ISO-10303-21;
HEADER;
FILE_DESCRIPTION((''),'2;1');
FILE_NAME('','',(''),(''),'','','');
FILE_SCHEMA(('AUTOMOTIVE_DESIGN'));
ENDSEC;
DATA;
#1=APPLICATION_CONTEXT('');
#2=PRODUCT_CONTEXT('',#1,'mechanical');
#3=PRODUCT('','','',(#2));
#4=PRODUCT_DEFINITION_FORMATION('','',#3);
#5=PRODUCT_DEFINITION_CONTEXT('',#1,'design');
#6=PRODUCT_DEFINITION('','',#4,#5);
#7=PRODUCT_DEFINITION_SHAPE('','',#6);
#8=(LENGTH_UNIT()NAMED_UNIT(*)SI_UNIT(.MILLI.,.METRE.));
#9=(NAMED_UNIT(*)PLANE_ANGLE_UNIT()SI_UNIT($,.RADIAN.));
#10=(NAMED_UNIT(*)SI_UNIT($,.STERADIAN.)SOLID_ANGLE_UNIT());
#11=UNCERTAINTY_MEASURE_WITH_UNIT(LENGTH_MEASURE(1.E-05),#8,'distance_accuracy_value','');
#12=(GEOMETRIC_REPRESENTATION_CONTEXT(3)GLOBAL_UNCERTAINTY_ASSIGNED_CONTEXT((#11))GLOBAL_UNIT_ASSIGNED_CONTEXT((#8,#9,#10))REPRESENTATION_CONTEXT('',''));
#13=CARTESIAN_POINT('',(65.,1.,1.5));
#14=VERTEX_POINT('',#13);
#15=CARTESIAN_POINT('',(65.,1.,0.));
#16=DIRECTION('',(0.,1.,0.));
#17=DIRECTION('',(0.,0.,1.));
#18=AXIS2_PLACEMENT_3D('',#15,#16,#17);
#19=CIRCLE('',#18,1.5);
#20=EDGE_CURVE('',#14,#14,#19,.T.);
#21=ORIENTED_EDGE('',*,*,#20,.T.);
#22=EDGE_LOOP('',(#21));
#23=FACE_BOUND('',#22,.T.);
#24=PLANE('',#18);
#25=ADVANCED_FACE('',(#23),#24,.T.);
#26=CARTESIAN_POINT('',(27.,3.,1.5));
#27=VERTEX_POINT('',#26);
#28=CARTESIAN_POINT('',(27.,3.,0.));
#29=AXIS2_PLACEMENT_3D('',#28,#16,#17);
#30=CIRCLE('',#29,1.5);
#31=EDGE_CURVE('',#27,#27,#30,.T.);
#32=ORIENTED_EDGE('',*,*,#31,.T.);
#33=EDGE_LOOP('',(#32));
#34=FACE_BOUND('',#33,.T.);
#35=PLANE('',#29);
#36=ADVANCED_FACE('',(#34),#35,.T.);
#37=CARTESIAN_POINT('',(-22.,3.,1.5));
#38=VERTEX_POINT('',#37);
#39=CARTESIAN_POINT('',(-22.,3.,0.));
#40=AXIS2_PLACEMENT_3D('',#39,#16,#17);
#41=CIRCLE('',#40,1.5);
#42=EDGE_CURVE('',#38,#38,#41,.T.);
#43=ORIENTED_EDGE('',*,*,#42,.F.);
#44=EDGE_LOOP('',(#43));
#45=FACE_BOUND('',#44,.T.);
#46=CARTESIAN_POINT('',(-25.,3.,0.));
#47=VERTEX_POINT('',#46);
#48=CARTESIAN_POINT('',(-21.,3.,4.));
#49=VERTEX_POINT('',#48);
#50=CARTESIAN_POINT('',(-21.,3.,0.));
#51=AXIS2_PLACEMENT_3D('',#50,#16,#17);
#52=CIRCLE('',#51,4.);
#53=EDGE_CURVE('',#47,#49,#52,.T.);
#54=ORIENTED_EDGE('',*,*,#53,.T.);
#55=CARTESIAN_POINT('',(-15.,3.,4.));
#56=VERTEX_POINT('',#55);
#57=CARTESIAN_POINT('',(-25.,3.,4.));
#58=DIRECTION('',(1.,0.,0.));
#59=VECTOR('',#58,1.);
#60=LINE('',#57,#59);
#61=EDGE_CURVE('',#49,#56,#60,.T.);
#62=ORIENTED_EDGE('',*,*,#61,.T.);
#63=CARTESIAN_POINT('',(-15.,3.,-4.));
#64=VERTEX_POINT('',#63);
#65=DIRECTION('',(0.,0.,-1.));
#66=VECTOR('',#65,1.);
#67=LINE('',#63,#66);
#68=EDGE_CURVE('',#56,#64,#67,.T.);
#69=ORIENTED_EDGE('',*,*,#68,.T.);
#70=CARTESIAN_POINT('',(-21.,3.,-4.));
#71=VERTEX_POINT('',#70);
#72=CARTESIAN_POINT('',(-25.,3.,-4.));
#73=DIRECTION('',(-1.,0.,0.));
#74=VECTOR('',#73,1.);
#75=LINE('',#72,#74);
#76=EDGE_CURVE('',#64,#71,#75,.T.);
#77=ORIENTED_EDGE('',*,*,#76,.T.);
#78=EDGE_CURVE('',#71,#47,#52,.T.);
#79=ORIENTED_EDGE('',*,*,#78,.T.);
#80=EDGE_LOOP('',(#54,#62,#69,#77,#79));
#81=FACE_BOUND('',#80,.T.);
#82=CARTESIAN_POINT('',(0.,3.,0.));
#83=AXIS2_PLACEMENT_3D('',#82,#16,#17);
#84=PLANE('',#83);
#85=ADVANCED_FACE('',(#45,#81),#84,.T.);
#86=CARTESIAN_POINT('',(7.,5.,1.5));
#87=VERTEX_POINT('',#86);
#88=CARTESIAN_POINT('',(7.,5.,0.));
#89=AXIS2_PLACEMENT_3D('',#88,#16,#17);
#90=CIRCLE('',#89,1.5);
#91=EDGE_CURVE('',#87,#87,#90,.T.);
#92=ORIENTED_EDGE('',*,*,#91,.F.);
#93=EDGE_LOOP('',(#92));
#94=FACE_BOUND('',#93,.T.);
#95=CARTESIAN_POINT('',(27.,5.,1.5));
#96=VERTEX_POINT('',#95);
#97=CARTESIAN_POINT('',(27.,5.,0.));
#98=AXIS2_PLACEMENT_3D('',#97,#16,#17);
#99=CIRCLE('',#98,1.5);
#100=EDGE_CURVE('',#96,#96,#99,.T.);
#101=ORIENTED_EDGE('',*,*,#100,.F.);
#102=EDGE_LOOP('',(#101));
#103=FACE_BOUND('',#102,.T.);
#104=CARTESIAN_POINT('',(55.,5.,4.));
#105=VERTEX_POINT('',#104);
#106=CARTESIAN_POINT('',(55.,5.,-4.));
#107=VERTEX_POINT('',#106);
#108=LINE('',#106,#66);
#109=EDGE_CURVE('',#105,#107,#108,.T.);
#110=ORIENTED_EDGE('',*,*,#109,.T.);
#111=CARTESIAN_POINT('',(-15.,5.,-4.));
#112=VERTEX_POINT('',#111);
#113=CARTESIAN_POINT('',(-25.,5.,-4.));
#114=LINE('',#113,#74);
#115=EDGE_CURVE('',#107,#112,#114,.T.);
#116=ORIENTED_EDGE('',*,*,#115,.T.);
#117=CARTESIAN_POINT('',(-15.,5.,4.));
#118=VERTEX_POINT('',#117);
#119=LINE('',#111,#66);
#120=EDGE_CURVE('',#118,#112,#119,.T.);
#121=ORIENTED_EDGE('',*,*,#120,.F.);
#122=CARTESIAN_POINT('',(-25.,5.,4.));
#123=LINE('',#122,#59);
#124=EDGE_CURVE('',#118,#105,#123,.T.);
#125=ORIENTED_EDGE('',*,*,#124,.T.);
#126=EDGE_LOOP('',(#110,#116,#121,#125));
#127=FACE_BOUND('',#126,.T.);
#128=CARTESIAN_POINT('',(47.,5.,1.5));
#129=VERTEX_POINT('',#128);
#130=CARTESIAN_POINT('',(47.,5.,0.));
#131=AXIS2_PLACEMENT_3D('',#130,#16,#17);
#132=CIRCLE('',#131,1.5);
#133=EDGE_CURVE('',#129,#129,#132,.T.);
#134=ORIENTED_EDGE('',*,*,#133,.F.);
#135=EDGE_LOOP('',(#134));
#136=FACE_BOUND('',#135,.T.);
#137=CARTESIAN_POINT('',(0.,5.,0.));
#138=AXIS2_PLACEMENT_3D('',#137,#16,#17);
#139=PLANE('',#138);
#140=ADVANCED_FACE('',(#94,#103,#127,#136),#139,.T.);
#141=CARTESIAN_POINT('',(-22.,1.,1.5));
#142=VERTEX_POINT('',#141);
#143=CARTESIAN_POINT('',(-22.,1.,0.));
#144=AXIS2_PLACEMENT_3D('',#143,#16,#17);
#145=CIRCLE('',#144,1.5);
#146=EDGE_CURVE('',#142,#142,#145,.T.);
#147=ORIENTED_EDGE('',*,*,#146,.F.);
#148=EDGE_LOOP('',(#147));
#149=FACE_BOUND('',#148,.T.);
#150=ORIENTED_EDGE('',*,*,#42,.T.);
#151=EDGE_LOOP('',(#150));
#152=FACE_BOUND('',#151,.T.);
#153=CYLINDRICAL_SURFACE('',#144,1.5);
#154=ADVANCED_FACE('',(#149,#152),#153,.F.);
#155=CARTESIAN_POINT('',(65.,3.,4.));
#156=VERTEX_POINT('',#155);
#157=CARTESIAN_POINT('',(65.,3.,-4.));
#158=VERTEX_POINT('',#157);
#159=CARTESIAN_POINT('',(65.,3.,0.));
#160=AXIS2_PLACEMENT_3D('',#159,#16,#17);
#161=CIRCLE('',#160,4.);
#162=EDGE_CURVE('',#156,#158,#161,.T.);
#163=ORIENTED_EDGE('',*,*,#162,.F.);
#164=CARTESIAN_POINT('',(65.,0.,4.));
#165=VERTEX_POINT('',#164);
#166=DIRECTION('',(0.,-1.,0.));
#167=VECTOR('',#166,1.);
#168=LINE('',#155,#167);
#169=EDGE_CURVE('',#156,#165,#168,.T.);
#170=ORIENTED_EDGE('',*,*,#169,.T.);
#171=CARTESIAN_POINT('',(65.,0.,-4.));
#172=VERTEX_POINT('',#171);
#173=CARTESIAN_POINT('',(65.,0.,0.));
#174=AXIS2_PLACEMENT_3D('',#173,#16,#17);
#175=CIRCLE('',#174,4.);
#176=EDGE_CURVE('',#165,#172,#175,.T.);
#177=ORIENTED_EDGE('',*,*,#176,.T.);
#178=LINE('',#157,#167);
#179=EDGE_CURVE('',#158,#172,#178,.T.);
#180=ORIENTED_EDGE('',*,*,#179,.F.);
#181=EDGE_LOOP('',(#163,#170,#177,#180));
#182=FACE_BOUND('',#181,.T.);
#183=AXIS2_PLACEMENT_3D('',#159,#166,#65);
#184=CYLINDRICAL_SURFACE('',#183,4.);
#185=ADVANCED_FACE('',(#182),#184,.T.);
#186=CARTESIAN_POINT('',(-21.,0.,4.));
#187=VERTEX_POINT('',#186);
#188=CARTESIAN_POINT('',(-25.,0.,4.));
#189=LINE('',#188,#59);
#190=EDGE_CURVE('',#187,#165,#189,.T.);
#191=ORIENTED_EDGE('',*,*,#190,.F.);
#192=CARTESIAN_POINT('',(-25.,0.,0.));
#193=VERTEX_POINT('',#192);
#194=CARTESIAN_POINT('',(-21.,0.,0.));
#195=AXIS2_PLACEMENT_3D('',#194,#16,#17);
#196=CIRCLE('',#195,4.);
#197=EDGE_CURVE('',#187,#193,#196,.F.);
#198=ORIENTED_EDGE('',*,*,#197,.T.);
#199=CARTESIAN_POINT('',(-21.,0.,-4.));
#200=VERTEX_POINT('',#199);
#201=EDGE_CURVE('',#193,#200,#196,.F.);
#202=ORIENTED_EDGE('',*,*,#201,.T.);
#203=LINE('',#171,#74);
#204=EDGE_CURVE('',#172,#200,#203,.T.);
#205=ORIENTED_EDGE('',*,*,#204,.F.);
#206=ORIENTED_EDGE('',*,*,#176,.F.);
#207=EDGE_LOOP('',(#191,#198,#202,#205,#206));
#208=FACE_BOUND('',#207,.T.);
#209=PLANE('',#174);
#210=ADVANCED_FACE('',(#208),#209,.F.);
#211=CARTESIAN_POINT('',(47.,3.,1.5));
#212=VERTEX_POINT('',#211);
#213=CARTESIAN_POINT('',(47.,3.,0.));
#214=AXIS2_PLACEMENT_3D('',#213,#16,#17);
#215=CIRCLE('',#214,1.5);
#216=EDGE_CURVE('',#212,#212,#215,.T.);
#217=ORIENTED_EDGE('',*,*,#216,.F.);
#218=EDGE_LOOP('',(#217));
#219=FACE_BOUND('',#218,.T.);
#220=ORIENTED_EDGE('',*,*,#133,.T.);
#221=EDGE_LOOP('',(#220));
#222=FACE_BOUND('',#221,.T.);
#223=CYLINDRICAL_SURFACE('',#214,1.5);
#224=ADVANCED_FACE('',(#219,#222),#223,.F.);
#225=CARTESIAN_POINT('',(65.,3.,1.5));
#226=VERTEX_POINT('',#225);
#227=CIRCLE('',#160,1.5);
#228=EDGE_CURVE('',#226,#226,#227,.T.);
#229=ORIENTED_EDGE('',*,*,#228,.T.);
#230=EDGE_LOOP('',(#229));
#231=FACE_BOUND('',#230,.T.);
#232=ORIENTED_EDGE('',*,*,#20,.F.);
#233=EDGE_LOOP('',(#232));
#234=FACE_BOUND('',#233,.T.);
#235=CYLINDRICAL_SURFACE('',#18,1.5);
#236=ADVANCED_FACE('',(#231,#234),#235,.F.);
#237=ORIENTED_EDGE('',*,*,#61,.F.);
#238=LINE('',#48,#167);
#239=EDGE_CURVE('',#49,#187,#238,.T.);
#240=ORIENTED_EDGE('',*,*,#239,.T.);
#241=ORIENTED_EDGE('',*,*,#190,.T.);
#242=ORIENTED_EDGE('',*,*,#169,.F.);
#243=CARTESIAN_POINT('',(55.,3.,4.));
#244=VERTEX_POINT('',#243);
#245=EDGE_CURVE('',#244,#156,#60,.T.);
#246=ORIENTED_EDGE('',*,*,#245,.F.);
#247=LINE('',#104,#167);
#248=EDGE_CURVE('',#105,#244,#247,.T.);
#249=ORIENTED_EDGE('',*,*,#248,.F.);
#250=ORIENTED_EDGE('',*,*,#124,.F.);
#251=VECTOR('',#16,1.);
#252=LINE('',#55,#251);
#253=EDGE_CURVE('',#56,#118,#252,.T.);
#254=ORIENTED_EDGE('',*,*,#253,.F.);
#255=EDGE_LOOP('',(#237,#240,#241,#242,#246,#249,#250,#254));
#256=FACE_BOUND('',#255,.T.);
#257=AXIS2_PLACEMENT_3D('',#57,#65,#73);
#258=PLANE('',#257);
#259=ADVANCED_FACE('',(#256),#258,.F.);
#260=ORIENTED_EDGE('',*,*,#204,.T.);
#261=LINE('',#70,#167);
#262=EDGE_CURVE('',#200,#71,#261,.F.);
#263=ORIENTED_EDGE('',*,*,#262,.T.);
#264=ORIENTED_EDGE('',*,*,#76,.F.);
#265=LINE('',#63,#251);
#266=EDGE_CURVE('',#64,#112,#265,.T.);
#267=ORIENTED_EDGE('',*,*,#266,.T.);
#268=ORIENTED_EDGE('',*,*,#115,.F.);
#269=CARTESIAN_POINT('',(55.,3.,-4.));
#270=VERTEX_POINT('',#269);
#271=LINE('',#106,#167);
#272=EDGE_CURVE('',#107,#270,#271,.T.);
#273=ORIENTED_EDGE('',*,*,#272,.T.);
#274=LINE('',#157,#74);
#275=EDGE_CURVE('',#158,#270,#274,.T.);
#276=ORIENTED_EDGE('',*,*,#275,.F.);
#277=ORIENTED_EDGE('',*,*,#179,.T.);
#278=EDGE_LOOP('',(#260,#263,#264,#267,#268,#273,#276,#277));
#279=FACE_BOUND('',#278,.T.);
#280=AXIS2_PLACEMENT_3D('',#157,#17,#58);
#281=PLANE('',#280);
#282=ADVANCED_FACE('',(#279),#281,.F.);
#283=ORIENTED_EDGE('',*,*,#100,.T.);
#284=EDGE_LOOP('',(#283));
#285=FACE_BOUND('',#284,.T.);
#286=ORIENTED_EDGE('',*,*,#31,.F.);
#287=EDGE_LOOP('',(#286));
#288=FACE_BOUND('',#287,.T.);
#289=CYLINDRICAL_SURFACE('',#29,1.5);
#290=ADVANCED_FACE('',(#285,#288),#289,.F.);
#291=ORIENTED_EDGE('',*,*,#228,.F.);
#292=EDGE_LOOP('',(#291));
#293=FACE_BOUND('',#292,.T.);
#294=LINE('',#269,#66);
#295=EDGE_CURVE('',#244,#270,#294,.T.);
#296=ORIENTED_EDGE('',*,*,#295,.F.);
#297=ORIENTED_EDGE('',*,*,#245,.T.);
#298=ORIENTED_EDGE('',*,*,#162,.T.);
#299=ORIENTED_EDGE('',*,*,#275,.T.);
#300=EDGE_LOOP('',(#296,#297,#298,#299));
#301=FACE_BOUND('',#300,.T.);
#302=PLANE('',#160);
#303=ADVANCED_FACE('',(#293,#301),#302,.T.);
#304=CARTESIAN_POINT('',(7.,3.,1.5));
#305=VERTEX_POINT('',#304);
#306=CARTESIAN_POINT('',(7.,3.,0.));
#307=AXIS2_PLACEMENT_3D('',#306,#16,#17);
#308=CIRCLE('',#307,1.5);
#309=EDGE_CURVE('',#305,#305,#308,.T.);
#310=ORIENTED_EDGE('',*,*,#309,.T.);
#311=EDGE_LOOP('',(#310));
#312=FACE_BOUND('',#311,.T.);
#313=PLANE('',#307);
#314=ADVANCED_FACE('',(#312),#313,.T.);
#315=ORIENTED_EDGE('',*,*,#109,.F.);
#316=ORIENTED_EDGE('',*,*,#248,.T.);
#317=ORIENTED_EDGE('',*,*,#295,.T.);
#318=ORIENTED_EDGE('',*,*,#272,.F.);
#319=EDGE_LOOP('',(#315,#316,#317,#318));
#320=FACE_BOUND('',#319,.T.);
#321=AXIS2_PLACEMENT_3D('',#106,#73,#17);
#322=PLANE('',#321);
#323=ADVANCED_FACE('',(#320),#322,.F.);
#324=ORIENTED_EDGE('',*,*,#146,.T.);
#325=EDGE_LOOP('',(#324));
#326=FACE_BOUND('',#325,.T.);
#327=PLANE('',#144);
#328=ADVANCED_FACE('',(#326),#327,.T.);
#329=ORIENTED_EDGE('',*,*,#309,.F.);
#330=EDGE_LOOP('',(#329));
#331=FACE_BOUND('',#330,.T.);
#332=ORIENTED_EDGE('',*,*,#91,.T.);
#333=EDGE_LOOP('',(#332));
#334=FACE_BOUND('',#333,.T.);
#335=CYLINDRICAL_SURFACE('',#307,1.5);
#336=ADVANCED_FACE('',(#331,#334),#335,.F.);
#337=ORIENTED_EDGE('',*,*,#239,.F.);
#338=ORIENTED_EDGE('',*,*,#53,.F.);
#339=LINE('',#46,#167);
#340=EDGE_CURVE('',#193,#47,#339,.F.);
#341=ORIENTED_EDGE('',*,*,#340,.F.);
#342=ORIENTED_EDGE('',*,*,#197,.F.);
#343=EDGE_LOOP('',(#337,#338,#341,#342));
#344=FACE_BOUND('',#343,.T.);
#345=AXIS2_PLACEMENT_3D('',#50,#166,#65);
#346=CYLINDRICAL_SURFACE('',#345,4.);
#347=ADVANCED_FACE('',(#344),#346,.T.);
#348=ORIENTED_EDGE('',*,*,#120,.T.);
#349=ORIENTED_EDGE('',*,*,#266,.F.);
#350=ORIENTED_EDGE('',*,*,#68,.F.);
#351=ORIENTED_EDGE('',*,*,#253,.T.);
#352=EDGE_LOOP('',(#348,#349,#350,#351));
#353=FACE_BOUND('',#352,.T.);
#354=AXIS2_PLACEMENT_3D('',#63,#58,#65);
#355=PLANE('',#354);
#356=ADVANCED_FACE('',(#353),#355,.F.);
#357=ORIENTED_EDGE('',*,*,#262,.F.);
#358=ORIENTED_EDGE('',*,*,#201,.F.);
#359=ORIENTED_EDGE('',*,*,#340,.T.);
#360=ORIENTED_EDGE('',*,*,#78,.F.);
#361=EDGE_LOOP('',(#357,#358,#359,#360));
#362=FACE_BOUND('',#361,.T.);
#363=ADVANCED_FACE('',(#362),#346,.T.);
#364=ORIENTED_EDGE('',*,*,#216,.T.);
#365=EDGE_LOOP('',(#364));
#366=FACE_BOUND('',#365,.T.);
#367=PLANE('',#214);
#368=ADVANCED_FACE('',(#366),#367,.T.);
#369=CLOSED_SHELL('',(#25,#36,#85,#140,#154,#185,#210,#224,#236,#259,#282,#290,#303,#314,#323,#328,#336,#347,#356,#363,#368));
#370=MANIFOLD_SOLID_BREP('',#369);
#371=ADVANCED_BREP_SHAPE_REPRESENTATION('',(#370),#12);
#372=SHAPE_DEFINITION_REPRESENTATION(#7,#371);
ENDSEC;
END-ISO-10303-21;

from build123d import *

# Parameters (mm, degrees)
BOSS_EXTRUDE2_DEPTH = 3
SKETCH3_W           = 80
SKETCH3_H           = 8
BOSS_EXTRUDE3_DEPTH = 2
SKETCH4_R           = 1.5
CUT_EXTRUDE5_DEPTH  = 2
SKETCH12_R          = 1.5
CUT_EXTRUDE6_DEPTH  = 2
SKETCH16_W          = 10
SKETCH16_H          = 8
CUT_EXTRUDE7_DEPTH  = 2
SKETCH17_R          = 1.5
CUT_EXTRUDE8_DEPTH  = 2
FILLET1_R           = 4


with BuildPart() as part:
    # Sketch1 → Boss-Extrude2 (new body)
    with BuildSketch(Plane(origin=(0, 0, 0), x_dir=(1, 0, 0), z_dir=(0, 1, 0))):
        with BuildLine():
            Line((-25, -4), (65, -4))
            ThreePointArc((65, -4), (69, 0), (65, 4))
            Line((65, 4), (-25, 4))
            Line((-25, 4), (-25, -4))
        make_face()
    extrude(amount=BOSS_EXTRUDE2_DEPTH)

    # Sketch3 → Boss-Extrude3 (add)
    with BuildSketch(Plane(origin=(0, 3, 0), x_dir=(1, 0, 0), z_dir=(0, 1, 0))):
        with Locations((15, 0)):
            Rectangle(SKETCH3_W, SKETCH3_H)
    extrude(amount=BOSS_EXTRUDE3_DEPTH)

    # Sketch4 → Cut-Extrude5 (cut)
    with BuildSketch(Plane(origin=(0, 3, 0), x_dir=(1, 0, 0), z_dir=(0, 1, 0))):
        with Locations(Location((65, 0, 0), (0, 0, 270))):
            Circle(SKETCH4_R)
    extrude(amount=-CUT_EXTRUDE5_DEPTH, mode=Mode.SUBTRACT)

    # Sketch12 → Cut-Extrude6 (cut)
    with BuildSketch(Plane(origin=(0, 5, 0), x_dir=(1, 0, 0), z_dir=(0, 1, 0))):
        with Locations(Location((47, 0, 0), (0, 0, 270))):
            Circle(SKETCH12_R)
        with Locations(Location((27, 0, 0), (0, 0, 270))):
            Circle(SKETCH12_R)
        with Locations(Location((7, 0, 0), (0, 0, 270))):
            Circle(SKETCH12_R)
    extrude(amount=-CUT_EXTRUDE6_DEPTH, mode=Mode.SUBTRACT)

    # Sketch16 → Cut-Extrude7 (cut)
    with BuildSketch(Plane(origin=(0, 5, 0), x_dir=(1, 0, 0), z_dir=(0, 1, 0))):
        with Locations((-20, 0)):
            Rectangle(SKETCH16_W, SKETCH16_H)
    extrude(amount=-CUT_EXTRUDE7_DEPTH, mode=Mode.SUBTRACT)

    # Sketch17 → Cut-Extrude8 (cut)
    with BuildSketch(Plane(origin=(0, 3, 0), x_dir=(1, 0, 0), z_dir=(0, 1, 0))):
        with Locations(Location((-22, 0, 0), (0, 0, 270))):
            Circle(SKETCH17_R)
    extrude(amount=-CUT_EXTRUDE8_DEPTH, mode=Mode.SUBTRACT)

    # Fillet1
    fillet1_edges = [part.edges().sort_by_distance(p)[0] for p in [
        (-25, 1.5, -4),
        (-25, 1.5, 4),
    ]]
    fillet(fillet1_edges, radius=FILLET1_R - 0.0001)  # a hair under: the kernel refuses the full size


solid = part.part
